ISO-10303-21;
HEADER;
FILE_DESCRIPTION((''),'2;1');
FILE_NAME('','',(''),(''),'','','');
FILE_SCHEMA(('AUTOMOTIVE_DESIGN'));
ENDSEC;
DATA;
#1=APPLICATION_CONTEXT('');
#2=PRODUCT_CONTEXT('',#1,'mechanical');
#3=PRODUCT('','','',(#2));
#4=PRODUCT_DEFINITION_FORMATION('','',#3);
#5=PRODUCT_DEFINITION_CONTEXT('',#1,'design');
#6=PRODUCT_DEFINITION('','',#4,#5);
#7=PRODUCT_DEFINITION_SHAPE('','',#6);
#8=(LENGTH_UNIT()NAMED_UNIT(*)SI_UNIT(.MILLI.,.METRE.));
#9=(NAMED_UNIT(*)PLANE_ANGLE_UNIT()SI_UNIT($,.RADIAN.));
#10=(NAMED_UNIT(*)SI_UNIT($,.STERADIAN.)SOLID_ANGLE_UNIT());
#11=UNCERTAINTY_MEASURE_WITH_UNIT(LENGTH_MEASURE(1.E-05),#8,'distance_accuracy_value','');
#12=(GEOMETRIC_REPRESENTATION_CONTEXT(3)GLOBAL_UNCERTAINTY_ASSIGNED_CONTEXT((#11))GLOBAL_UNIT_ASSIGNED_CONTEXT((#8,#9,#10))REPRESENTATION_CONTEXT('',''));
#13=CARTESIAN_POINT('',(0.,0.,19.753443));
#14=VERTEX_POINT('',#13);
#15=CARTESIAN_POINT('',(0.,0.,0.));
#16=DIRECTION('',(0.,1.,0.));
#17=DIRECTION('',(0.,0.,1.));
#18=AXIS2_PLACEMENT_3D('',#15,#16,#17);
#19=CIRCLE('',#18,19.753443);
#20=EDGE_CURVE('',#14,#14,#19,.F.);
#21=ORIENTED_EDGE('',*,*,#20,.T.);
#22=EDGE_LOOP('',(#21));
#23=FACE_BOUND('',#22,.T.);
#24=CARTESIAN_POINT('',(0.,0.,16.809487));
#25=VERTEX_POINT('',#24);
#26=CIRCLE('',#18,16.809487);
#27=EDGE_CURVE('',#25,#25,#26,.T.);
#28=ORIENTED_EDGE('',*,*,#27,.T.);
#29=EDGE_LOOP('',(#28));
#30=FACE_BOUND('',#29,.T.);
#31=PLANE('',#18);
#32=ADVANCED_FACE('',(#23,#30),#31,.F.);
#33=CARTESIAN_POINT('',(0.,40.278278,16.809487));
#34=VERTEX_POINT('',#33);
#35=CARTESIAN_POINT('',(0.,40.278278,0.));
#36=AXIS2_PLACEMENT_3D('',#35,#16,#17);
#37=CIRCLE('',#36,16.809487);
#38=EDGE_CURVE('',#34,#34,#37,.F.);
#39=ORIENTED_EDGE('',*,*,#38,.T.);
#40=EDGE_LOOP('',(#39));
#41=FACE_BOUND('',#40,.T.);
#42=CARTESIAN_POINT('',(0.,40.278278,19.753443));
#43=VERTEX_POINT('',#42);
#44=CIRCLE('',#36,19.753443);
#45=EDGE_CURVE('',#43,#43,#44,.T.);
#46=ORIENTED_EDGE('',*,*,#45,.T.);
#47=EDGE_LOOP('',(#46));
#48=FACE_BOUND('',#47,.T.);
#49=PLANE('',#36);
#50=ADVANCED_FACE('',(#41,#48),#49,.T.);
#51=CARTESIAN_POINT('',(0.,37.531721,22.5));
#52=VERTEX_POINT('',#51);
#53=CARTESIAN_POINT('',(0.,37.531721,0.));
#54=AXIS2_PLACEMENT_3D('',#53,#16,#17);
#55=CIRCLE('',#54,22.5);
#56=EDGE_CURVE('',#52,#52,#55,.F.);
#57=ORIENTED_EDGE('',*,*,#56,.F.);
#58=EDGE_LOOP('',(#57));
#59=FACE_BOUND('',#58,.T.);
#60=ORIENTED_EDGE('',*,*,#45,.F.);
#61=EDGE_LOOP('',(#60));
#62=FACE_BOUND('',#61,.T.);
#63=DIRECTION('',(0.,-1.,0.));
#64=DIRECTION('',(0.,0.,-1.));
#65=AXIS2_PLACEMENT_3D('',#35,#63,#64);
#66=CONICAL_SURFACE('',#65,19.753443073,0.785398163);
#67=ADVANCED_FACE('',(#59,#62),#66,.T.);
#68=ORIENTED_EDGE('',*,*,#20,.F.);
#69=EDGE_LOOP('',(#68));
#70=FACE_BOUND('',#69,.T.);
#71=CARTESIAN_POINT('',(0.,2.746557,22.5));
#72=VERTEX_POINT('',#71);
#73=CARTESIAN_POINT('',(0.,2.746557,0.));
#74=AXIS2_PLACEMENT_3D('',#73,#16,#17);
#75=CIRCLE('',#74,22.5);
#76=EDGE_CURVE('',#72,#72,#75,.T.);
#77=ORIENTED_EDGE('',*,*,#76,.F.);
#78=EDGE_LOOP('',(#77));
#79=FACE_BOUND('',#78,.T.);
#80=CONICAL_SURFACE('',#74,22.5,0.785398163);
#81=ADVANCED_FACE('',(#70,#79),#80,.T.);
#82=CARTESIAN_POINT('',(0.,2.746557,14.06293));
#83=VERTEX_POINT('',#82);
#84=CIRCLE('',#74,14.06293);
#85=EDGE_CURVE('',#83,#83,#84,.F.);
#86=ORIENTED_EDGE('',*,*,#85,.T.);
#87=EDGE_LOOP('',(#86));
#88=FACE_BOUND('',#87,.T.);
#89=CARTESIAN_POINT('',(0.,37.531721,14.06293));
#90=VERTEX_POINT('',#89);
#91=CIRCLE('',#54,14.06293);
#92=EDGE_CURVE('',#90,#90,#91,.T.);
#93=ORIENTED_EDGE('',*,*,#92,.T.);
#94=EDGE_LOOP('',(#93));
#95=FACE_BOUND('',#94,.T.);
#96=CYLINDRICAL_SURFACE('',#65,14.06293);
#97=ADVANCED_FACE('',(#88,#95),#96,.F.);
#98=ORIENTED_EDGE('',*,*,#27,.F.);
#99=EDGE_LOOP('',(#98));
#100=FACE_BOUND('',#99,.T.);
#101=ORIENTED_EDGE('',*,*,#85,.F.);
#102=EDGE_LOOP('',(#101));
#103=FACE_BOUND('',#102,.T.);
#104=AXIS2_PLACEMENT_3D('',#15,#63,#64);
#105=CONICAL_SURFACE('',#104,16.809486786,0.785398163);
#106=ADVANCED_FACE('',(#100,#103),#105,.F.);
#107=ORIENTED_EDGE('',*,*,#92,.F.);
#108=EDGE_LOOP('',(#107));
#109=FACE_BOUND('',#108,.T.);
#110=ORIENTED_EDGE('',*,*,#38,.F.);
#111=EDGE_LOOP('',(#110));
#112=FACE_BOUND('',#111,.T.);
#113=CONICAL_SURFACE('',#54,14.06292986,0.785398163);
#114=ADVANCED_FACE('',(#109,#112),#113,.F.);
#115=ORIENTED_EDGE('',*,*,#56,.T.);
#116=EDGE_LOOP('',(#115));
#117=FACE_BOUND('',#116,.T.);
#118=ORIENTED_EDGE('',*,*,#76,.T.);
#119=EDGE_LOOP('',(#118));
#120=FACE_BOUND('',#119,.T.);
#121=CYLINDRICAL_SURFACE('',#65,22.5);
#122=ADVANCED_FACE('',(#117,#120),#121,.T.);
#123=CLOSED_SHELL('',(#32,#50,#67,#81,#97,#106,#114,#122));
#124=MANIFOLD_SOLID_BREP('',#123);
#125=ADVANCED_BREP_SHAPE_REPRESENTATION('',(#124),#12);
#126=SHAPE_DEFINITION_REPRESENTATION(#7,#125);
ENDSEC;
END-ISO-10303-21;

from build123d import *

# Parameters (mm, degrees)
SKETCH1_R           = 22.5
BOSS_EXTRUDE1_DEPTH = 40.2782778
SKETCH2_R           = 14.06292986
CUT_EXTRUDE1_DEPTH  = 52.330689286
CHAMFER1_SIZE       = 2.746556927


with BuildPart() as part:
    # Sketch1 → Boss-Extrude1 (new body)
    with BuildSketch(Plane(origin=(0, 0, 0), x_dir=(1, 0, 0), z_dir=(0, 1, 0))):
        Circle(SKETCH1_R)
    extrude(amount=BOSS_EXTRUDE1_DEPTH)

    # Sketch2 → Cut-Extrude1 (cut, through all)
    with BuildSketch(Plane(origin=(0, 0, 0), x_dir=(1, 0, 0), z_dir=(0, 1, 0))):
        Circle(SKETCH2_R)
    extrude(amount=CUT_EXTRUDE1_DEPTH, mode=Mode.SUBTRACT)

    # Chamfer1
    chamfer1_edges = [part.edges().sort_by_distance(p)[0] for p in [
        (-14.06292986, 40.2782778, 0),
        (-14.06292986, 0, 0),
        (-22.5, 0, 0),
        (-22.5, 40.2782778, 0),
    ]]
    chamfer(chamfer1_edges, length=CHAMFER1_SIZE)


solid = part.part
